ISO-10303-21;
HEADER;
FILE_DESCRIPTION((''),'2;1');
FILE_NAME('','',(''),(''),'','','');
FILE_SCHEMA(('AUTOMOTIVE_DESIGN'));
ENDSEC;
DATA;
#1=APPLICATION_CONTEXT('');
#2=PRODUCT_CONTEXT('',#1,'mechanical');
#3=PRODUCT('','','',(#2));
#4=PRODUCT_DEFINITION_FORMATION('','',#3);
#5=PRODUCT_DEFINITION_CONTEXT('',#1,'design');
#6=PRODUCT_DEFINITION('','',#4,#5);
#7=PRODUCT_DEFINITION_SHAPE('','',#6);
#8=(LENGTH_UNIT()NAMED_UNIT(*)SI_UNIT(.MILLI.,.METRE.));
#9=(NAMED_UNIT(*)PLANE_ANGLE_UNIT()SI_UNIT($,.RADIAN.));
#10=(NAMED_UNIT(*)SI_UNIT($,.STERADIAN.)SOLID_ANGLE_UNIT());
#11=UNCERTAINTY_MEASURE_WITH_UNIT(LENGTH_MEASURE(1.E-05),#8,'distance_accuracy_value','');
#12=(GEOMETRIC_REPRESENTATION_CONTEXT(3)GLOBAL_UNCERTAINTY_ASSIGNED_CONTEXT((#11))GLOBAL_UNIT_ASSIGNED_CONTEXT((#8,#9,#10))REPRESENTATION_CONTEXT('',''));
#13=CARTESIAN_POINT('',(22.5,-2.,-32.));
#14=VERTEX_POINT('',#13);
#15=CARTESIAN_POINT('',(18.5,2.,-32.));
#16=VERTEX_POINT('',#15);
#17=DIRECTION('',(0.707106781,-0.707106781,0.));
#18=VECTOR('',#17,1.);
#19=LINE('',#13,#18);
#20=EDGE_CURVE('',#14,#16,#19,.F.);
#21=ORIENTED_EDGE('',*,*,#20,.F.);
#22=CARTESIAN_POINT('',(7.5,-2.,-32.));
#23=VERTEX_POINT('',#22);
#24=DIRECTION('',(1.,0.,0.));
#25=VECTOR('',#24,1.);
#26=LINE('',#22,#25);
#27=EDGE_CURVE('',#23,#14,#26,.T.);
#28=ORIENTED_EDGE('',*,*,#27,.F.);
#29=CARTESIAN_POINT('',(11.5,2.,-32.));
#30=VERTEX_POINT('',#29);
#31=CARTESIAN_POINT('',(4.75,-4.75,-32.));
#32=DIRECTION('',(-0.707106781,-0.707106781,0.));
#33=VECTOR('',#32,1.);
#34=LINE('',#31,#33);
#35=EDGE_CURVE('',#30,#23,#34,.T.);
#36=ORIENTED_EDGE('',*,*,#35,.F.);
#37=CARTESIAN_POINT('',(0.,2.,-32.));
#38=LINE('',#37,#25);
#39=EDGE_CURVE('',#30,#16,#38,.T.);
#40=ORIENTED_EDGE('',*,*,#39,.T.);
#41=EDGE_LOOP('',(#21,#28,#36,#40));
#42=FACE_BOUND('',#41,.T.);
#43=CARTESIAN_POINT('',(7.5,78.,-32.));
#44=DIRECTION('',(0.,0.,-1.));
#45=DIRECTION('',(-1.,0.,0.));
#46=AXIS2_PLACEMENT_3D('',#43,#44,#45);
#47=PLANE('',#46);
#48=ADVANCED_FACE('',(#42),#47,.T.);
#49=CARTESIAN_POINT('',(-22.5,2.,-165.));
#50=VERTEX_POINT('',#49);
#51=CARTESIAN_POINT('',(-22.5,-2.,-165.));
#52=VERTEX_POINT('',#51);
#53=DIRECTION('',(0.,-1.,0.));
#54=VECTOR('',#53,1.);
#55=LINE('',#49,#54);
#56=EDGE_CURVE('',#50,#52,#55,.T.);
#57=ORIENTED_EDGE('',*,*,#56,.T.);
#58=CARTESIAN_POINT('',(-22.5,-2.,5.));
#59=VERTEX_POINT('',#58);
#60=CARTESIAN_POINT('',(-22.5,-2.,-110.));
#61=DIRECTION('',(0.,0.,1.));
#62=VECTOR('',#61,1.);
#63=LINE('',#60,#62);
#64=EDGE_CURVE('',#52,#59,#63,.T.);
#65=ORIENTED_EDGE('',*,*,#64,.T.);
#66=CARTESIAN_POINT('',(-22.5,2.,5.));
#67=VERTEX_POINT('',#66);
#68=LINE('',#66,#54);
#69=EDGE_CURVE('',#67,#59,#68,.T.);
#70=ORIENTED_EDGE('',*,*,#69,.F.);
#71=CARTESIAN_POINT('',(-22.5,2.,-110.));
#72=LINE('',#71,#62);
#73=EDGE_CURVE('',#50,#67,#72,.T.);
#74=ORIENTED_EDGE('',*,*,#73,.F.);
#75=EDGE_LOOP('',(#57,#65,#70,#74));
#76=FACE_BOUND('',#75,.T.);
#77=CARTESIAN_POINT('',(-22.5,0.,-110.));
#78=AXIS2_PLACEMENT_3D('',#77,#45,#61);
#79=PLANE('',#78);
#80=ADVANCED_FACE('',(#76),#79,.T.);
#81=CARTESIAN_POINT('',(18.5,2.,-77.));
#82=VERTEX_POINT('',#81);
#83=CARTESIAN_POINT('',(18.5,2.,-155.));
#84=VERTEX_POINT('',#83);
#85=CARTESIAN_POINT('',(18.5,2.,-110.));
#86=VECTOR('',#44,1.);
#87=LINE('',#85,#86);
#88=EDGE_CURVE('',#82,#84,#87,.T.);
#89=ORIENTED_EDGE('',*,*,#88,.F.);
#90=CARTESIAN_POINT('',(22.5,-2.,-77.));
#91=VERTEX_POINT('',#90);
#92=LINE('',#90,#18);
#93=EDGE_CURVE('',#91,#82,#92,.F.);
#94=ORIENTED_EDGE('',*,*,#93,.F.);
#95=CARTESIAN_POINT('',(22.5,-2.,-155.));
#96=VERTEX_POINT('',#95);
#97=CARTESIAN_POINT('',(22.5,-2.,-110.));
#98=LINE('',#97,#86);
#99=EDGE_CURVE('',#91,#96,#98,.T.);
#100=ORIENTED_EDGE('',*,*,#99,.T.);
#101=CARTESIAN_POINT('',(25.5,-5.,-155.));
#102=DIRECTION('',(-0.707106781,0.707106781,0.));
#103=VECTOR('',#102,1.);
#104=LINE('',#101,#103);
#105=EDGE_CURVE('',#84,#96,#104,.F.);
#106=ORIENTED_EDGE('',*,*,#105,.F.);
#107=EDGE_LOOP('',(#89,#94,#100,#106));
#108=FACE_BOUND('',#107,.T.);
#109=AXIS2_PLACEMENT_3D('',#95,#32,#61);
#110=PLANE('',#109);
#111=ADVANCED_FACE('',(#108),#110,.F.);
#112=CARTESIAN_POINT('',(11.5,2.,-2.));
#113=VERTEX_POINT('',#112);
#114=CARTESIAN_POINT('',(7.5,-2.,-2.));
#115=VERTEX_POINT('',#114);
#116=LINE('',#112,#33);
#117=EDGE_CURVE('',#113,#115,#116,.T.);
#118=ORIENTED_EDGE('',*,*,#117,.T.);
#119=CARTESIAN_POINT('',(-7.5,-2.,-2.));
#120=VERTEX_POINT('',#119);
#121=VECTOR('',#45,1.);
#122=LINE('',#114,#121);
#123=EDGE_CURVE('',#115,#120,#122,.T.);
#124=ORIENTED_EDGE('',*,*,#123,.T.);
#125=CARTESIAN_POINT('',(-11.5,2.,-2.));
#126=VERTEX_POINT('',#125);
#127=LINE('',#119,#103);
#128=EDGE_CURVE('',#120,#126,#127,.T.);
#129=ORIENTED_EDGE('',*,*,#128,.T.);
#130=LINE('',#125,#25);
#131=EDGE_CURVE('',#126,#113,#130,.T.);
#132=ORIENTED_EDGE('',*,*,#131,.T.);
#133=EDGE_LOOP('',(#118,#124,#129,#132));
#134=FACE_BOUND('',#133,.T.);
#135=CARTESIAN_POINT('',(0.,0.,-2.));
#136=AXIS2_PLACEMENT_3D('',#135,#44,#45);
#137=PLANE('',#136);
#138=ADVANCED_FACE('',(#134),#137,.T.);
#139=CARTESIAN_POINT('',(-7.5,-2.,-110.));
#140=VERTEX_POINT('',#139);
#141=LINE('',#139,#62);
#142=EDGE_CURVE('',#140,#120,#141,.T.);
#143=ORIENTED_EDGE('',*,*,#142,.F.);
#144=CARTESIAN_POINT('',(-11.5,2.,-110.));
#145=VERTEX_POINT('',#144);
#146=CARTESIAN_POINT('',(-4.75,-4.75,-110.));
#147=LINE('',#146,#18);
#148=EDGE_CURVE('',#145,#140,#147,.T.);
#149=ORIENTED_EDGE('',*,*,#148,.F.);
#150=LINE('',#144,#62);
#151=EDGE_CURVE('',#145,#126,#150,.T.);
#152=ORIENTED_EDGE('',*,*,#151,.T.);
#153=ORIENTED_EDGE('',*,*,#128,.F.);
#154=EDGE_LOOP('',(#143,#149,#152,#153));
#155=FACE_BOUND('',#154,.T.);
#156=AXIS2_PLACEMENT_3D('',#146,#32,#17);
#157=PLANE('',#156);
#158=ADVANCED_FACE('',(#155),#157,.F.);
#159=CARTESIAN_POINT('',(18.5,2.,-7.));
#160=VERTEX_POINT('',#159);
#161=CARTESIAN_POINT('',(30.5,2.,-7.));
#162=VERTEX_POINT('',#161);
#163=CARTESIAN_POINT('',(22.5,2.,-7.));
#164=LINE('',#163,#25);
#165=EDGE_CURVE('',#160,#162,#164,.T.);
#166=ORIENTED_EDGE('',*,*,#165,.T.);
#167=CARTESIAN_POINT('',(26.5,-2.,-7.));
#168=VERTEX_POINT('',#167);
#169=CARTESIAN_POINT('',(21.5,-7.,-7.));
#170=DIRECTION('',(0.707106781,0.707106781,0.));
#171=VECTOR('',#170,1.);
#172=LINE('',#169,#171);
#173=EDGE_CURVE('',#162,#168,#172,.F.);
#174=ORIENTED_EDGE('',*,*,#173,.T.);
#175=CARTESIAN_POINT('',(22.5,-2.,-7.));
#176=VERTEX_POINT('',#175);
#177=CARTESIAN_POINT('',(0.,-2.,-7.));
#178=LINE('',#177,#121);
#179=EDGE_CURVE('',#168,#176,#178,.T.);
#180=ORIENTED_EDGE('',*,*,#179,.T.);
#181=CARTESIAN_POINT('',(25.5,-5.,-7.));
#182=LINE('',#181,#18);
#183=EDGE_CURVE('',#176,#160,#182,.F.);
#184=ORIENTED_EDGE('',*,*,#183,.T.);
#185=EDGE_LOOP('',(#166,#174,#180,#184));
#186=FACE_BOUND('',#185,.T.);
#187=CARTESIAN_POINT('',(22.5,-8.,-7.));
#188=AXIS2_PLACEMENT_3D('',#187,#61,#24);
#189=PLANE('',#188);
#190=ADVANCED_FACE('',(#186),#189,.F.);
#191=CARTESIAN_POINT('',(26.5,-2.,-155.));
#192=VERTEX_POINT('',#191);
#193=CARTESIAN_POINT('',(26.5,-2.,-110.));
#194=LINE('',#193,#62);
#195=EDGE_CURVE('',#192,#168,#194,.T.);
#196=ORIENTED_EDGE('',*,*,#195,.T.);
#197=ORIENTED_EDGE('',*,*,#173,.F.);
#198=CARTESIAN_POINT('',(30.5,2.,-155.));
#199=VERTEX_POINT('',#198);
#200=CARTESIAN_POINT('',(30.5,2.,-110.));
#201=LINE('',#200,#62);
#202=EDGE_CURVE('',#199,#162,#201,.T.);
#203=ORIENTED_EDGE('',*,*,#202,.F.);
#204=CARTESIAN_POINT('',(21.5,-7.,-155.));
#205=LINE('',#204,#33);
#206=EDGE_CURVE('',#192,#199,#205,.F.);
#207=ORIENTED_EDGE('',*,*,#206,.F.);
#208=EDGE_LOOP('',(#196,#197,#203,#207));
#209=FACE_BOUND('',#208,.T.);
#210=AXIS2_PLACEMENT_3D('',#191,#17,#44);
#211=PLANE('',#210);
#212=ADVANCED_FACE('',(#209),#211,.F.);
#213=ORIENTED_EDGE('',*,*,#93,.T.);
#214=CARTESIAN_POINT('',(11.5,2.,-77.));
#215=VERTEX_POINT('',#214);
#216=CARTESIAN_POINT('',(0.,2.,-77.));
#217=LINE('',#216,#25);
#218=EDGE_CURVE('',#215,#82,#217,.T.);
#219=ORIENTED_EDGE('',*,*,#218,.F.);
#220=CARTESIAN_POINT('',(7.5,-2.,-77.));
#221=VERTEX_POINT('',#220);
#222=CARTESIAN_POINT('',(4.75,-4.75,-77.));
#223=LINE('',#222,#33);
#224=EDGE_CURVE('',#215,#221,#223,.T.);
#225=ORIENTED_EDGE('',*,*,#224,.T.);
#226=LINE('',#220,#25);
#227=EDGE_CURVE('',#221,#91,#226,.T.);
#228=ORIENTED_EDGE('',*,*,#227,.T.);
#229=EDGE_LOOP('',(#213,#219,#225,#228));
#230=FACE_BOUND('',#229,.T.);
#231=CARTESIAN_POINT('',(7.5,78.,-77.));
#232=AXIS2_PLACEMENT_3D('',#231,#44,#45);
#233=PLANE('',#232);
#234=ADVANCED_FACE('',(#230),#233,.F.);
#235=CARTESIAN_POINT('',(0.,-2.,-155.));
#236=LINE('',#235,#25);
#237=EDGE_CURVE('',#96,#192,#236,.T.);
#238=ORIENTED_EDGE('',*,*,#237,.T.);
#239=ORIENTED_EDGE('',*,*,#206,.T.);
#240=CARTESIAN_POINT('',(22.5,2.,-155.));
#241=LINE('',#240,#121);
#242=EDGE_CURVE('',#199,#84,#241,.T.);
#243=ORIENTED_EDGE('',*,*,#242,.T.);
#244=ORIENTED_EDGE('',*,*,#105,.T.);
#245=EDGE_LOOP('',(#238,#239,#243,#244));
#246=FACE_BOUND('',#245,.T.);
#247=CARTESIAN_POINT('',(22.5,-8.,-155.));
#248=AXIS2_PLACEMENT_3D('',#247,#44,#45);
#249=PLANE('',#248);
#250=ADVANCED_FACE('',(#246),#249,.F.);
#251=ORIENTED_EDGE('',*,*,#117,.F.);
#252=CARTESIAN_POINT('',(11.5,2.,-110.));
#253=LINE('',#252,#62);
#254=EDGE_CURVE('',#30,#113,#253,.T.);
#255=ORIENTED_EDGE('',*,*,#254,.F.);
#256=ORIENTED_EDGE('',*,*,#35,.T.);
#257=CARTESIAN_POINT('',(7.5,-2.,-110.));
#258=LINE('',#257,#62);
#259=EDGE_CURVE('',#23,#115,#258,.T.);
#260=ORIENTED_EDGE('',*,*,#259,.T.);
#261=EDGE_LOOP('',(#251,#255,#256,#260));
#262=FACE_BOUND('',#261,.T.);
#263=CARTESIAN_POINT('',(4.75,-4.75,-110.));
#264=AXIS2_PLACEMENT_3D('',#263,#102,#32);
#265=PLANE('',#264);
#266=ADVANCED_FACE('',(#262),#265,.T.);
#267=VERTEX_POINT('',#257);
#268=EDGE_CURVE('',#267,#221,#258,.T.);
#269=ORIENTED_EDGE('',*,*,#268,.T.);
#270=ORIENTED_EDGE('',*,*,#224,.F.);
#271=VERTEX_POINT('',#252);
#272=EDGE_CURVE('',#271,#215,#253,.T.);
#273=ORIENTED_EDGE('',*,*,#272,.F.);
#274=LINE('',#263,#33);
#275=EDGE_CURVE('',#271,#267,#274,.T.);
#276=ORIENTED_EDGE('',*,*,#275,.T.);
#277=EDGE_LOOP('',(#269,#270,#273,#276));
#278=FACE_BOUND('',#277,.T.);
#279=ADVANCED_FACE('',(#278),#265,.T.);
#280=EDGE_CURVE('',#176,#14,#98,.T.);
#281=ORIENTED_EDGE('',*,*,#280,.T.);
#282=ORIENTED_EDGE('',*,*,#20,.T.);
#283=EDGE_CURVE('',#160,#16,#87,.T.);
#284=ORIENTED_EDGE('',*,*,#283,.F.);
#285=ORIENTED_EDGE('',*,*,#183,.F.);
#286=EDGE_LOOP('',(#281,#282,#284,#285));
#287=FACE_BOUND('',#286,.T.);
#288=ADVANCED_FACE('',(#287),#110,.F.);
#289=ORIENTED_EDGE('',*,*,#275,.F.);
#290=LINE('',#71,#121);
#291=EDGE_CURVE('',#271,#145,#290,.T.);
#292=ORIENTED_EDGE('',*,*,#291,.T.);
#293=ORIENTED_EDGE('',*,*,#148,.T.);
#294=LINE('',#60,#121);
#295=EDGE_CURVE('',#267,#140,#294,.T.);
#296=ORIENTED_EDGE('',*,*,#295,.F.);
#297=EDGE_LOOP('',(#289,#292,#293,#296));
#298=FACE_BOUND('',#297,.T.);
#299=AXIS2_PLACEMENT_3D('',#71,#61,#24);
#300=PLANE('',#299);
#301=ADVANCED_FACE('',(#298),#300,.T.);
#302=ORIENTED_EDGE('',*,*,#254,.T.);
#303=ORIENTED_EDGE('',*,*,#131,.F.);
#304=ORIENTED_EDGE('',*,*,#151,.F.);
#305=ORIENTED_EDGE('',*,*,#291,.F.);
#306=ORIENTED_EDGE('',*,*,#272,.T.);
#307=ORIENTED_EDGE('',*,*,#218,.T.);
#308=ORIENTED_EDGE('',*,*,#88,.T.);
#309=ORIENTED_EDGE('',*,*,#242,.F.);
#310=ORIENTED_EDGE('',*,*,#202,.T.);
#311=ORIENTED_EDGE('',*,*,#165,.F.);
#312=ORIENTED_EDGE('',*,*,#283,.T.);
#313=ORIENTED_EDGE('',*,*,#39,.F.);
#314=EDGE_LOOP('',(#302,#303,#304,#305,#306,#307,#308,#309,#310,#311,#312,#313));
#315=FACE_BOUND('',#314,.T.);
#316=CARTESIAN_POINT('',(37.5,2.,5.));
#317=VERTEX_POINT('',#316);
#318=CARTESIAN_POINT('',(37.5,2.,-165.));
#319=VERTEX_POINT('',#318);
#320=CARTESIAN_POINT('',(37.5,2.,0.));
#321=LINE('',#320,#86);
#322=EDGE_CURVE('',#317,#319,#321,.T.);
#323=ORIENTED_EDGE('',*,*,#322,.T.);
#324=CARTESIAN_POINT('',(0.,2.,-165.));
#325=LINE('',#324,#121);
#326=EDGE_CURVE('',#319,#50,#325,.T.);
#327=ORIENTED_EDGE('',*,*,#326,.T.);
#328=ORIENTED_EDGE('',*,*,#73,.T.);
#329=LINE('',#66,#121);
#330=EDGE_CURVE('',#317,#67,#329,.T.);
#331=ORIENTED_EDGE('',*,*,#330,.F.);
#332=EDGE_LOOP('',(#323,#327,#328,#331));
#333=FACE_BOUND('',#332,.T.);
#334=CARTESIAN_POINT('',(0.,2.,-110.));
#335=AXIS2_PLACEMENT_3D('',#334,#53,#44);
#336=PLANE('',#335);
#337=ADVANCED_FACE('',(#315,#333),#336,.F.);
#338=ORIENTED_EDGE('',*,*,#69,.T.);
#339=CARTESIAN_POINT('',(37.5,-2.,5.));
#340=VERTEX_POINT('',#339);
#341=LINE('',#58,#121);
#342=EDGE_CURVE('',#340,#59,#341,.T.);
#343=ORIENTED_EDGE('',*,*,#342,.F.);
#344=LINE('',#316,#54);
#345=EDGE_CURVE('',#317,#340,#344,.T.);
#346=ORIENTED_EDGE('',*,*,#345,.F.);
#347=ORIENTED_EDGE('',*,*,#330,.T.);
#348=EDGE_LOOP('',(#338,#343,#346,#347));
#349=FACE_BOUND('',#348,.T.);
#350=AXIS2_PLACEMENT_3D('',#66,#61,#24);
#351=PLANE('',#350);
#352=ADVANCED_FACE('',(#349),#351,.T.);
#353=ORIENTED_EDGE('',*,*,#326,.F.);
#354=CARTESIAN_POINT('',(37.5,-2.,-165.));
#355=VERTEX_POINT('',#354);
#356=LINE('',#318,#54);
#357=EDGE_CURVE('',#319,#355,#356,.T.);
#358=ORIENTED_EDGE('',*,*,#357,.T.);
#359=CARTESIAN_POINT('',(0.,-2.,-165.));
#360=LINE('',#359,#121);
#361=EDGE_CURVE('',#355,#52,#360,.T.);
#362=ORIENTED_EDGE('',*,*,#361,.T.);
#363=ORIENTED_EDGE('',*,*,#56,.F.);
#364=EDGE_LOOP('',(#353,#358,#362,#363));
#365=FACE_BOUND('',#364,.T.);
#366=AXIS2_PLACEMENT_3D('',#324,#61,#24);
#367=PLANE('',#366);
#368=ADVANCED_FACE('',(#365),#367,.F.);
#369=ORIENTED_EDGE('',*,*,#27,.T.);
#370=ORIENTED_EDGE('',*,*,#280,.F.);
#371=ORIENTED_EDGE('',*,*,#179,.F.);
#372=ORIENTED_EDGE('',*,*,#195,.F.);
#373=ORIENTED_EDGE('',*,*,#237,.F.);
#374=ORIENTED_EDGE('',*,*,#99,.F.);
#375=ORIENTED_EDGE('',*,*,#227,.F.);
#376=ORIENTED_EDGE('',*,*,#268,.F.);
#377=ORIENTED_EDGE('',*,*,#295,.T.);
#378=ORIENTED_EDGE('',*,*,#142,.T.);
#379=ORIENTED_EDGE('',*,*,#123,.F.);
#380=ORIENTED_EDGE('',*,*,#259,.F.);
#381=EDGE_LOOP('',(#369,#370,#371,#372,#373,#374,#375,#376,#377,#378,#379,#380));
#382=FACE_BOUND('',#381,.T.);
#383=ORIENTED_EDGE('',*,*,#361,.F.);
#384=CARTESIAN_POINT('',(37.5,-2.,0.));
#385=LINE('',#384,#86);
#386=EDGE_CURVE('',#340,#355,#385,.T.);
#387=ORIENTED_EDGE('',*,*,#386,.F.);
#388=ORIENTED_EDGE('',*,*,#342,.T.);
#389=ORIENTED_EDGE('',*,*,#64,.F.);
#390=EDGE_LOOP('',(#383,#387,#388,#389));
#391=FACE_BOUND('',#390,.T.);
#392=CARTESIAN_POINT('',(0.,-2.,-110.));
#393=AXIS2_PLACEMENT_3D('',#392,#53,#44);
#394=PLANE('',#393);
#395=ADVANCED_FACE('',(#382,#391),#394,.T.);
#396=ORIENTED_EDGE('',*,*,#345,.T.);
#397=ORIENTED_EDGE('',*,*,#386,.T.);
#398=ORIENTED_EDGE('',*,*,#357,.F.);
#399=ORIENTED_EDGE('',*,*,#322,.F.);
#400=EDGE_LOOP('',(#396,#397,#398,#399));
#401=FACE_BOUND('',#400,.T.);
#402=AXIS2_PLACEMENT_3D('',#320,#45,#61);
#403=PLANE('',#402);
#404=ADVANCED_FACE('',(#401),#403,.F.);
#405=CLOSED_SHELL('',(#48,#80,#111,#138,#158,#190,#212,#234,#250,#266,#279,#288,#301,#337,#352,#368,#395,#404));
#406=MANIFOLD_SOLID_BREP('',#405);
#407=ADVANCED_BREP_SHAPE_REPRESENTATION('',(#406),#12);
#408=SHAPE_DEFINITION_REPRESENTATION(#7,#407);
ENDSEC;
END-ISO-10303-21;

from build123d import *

# Parameters (mm, degrees)
DODANIE_WYCI_GNI_CIE1_DEPTH   = 110
DODANIE_WYCI_GNI_CIE1_2_DEPTH = 110
SZKIC2_W                      = 45
SZKIC2_H                      = 5
DODANIE_WYCI_GNI_CIE2_DEPTH   = 4
SZKIC4_W                      = 35
SZKIC4_H                      = 30
WYTNIJ_WYCI_GNI_CIE1_DEPTH    = 10
SZKIC5_W                      = 45
SZKIC5_H                      = 50
DODANIE_WYCI_GNI_CIE3_DEPTH   = 4
SZKIC6_W                      = 4
SZKIC6_H                      = 148
WYTNIJ_WYCI_GNI_CIE2_DEPTH    = 10
SFAZOWANIE1_SIZE              = 4
DODANIE_WYCI_GNI_CIE4_DEPTH   = 2
SZKIC9_W                      = 15
SZKIC9_H                      = 45
WYTNIJ_WYCI_GNI_CIE3_DEPTH    = 80


with BuildPart() as part:
    # Szkic1 → Dodanie-wyciągnięcie1 (new body)
    with BuildSketch(Plane.XY):
        Polygon((-7.5, -2), (-11.5, 2), (-22.5, 2), (-22.5, -2), align=None)
    extrude(amount=-DODANIE_WYCI_GNI_CIE1_DEPTH)



with BuildPart() as body_2:
    # Szkic1 → Dodanie-wyci_gni_cie1 2 (new body)
    with BuildSketch(Plane.XY):
        Polygon((22.5, 2), (11.5, 2), (7.5, -2), (22.5, -2), align=None)
    extrude(amount=-DODANIE_WYCI_GNI_CIE1_2_DEPTH)


with BuildPart() as part_1:
    add(part.part)

    add(body_2.part)  # Dodanie-wyciągnięcie2 merges body 2
    # Szkic2 → Dodanie-wyciągnięcie2 (add)
    with BuildSketch(Plane.XZ.offset(2)):
        with Locations((0, 2.5)):
            Rectangle(SZKIC2_W, SZKIC2_H)
        with Locations((0, -112.5)):
            Rectangle(SZKIC2_W, SZKIC2_H)
    extrude(amount=-DODANIE_WYCI_GNI_CIE2_DEPTH)

    # Szkic4 → Wytnij-wyciągnięcie1 (cut)
    with BuildSketch(Plane(origin=(0, 2, 0), x_dir=(1, 0, 0), z_dir=(0, 1, 0))):
        with Locations((22.5, 55)):
            Rectangle(SZKIC4_W, SZKIC4_H)
    extrude(amount=-WYTNIJ_WYCI_GNI_CIE1_DEPTH, mode=Mode.SUBTRACT)

    # Szkic5 → Dodanie-wyciągnięcie3 (add)
    with BuildSketch(Plane.XZ.offset(2)):
        with Locations((0, -140)):
            Rectangle(SZKIC5_W, SZKIC5_H)
        Polygon((37.5, 5), (22.5, 5), (22.5, -40), (22.5, -70), (22.5, -115), (22.5, -165), (37.5, -165), align=None)
    extrude(amount=-DODANIE_WYCI_GNI_CIE3_DEPTH)

    # Szkic6 → Wytnij-wyciągnięcie2 (cut)
    with BuildSketch(Plane(origin=(0, 2, 0), x_dir=(1, 0, 0), z_dir=(0, 1, 0))):
        with Locations((24.5, 81)):
            Rectangle(SZKIC6_W, SZKIC6_H)
    extrude(amount=-WYTNIJ_WYCI_GNI_CIE2_DEPTH, mode=Mode.SUBTRACT)

    # Sfazowanie1
    sfazowanie1_edges = [part_1.edges().sort_by_distance(p)[0] for p in [
        (22.5, 2, -23.5),
        (22.5, 2, -112.5),
        (26.5, 2, -81),
    ]]
    chamfer(sfazowanie1_edges, length=SFAZOWANIE1_SIZE - 0.0001)  # a hair under: the kernel refuses the full size

    # Szkic7 → Dodanie-wyciągnięcie4 (add)
    with BuildSketch(Plane(origin=(0, 0, 0), x_dir=(-1, 0, 0), z_dir=(0, 0, -1))):
        Polygon((-11.5, 2), (-7.5, -2), (7.5, -2), (11.5, 2), align=None)
    extrude(amount=DODANIE_WYCI_GNI_CIE4_DEPTH)

    # Szkic9 → Wytnij-wyciągnięcie3 (cut)
    with BuildSketch(Plane.XZ.offset(2)):
        with Locations((15, -54.5)):
            Rectangle(SZKIC9_W, SZKIC9_H)
    extrude(amount=-WYTNIJ_WYCI_GNI_CIE3_DEPTH, mode=Mode.SUBTRACT)


solid = part_1.part
